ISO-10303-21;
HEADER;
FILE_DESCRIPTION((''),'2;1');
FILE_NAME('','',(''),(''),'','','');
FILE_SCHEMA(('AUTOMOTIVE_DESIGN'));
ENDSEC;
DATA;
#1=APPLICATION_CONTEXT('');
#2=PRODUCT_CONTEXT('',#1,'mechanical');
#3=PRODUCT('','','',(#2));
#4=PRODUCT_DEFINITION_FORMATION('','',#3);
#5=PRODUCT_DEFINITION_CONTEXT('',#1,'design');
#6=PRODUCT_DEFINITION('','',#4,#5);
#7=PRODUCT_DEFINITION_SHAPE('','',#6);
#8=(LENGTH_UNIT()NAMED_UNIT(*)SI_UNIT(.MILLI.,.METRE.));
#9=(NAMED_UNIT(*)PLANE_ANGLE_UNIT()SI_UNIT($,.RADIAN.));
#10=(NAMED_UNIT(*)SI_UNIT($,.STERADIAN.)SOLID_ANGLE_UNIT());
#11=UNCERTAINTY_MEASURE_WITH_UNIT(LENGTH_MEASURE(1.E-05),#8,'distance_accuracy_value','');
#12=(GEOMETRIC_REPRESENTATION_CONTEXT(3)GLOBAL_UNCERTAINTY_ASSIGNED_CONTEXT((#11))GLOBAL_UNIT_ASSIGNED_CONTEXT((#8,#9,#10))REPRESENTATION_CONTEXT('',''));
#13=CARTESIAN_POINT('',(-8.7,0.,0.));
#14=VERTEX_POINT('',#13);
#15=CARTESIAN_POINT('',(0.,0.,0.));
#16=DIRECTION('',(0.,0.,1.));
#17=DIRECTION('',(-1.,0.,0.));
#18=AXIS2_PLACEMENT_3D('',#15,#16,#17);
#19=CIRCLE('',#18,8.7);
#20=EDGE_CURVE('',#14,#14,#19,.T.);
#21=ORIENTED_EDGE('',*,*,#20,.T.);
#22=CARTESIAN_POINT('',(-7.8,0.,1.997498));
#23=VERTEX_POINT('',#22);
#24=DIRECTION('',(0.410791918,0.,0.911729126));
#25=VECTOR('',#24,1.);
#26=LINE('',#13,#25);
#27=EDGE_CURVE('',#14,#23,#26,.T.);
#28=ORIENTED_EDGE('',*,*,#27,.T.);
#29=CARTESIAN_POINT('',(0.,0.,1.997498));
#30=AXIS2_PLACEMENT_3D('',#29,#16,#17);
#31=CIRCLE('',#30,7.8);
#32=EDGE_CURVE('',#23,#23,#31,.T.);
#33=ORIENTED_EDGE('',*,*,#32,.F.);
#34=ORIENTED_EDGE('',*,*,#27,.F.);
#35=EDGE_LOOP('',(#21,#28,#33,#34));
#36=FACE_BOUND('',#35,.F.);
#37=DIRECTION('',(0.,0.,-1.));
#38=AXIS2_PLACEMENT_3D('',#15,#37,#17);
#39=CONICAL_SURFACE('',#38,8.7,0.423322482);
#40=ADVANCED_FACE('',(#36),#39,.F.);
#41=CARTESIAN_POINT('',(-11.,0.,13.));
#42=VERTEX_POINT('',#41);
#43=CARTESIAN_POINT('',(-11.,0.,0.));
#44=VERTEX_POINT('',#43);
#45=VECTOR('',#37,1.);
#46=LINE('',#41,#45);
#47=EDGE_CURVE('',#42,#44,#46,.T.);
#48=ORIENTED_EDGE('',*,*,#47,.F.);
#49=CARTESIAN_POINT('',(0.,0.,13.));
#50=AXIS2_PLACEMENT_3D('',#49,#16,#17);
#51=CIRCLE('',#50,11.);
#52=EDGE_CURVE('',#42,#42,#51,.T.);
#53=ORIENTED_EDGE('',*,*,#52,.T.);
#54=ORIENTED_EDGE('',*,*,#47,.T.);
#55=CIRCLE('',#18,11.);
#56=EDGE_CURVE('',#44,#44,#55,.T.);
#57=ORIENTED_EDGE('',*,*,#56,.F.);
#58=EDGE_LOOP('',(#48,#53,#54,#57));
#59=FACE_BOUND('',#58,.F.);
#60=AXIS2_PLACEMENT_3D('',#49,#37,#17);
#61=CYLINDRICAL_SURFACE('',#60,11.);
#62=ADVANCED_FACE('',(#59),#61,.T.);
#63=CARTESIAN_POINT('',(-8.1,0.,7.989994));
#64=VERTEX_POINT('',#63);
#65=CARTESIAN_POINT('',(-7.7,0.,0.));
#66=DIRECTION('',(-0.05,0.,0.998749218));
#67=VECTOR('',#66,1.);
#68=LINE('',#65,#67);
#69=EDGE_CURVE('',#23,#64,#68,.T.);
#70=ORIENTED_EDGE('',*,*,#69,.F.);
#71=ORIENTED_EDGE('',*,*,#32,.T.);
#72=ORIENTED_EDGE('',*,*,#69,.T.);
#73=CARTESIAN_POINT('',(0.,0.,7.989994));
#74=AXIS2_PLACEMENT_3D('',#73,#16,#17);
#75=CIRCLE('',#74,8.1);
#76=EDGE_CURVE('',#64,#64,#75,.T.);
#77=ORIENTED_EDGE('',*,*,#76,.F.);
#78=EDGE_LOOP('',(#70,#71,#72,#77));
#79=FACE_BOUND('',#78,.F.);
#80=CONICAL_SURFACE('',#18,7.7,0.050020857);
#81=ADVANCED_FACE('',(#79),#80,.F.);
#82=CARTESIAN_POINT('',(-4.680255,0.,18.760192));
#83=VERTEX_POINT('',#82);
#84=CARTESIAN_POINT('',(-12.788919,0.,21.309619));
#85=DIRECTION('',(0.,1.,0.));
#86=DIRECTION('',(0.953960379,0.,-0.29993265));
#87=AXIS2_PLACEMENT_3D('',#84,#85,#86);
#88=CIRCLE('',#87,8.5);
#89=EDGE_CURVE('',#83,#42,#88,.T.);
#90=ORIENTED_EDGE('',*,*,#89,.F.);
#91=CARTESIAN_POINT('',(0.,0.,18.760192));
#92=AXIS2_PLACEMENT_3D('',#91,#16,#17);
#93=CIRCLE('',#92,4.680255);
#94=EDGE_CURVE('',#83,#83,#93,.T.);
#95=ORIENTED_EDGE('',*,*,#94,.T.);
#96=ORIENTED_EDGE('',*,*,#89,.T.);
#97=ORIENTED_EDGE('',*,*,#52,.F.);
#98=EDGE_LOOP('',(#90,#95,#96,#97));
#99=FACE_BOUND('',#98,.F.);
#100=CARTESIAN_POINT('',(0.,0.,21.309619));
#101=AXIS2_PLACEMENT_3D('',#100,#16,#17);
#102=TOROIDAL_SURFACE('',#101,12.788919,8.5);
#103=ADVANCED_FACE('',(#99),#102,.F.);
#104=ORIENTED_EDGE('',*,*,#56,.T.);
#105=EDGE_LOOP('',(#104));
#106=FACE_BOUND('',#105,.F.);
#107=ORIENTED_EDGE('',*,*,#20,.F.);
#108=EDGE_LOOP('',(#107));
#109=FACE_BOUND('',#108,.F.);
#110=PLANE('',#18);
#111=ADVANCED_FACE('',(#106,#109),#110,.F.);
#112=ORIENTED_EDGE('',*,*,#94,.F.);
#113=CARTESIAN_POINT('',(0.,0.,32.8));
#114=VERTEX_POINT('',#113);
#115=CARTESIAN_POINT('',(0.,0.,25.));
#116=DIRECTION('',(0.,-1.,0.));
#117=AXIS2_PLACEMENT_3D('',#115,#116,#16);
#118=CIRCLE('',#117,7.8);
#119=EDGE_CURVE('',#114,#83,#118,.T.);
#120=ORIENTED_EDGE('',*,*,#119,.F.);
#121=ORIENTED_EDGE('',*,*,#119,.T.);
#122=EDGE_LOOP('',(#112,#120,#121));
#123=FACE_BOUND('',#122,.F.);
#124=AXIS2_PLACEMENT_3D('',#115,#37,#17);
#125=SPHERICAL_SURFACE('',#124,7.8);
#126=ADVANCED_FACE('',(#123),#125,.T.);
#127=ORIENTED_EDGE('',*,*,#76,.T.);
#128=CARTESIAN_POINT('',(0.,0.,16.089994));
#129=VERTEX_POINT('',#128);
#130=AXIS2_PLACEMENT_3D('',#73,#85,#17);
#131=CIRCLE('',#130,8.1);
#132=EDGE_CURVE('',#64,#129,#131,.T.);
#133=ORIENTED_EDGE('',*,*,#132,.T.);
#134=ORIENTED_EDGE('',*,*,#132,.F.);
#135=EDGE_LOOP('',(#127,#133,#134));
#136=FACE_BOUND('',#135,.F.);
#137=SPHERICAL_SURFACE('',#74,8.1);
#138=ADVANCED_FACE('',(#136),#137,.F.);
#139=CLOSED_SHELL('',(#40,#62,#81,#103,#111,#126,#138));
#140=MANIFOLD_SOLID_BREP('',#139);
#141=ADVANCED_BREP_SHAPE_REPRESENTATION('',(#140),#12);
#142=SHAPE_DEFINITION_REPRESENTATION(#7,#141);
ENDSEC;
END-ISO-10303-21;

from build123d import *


# Not quite as in the source:
# - a fillet or chamfer that OpenCascade refuses, or shapes differently, is made with other operations: its cross-section is extruded or revolved along the edge and cut away or added
# - a feature names something its author has since deleted; it is built from what else it names


with BuildPart() as f1:
    # F0 (on Front) → F1 (revolve)
    with BuildSketch(Plane.XZ):
        with BuildLine():
            Line((-11, 13), (-11, 0))
            Line((-11, 0), (-7.7, 0))
            Line((-7.7, 0), (-8.1, 7.9899937422))
            ThreePointArc((-8.1, 7.9899937422), (-5.7275649276, 13.7175586698), (0, 16.0899937422))
            Line((0, 16.0899937422), (0, 17.2))
            ThreePointArc((0, 17.2), (-2.4667280394, 17.6003207651), (-4.680255449, 18.7601915949))
            ThreePointArc((-4.680255449, 18.7601915949), (-7.0630577198, 15.0275401408), (-11, 13))
        make_face()
        with BuildLine():
            ThreePointArc((0, 32.8), (-7.3996792349, 27.4667280394), (-4.680255449, 18.7601915949))
            ThreePointArc((-4.680255449, 18.7601915949), (-2.4667280394, 17.6003207651), (0, 17.2))
            Line((0, 17.2), (0, 32.8))
        make_face()
    revolve(axis=Axis((0, 0, 29.5921396464), (0, 0, 1)))

    # F2: chamfer of 2 x 1 on 1 edges, made by hand

    # F2_s1 → F2_t2 (revolve, cut)
    with BuildSketch(Plane.XZ):
        Polygon((-8.7, 0), (-7.8, 1.9974984355), (-7.7, 0), align=None)
    revolve(axis=Axis((0, 0, 0), (0, 0, 1)), mode=Mode.SUBTRACT)


solid = f1.part
